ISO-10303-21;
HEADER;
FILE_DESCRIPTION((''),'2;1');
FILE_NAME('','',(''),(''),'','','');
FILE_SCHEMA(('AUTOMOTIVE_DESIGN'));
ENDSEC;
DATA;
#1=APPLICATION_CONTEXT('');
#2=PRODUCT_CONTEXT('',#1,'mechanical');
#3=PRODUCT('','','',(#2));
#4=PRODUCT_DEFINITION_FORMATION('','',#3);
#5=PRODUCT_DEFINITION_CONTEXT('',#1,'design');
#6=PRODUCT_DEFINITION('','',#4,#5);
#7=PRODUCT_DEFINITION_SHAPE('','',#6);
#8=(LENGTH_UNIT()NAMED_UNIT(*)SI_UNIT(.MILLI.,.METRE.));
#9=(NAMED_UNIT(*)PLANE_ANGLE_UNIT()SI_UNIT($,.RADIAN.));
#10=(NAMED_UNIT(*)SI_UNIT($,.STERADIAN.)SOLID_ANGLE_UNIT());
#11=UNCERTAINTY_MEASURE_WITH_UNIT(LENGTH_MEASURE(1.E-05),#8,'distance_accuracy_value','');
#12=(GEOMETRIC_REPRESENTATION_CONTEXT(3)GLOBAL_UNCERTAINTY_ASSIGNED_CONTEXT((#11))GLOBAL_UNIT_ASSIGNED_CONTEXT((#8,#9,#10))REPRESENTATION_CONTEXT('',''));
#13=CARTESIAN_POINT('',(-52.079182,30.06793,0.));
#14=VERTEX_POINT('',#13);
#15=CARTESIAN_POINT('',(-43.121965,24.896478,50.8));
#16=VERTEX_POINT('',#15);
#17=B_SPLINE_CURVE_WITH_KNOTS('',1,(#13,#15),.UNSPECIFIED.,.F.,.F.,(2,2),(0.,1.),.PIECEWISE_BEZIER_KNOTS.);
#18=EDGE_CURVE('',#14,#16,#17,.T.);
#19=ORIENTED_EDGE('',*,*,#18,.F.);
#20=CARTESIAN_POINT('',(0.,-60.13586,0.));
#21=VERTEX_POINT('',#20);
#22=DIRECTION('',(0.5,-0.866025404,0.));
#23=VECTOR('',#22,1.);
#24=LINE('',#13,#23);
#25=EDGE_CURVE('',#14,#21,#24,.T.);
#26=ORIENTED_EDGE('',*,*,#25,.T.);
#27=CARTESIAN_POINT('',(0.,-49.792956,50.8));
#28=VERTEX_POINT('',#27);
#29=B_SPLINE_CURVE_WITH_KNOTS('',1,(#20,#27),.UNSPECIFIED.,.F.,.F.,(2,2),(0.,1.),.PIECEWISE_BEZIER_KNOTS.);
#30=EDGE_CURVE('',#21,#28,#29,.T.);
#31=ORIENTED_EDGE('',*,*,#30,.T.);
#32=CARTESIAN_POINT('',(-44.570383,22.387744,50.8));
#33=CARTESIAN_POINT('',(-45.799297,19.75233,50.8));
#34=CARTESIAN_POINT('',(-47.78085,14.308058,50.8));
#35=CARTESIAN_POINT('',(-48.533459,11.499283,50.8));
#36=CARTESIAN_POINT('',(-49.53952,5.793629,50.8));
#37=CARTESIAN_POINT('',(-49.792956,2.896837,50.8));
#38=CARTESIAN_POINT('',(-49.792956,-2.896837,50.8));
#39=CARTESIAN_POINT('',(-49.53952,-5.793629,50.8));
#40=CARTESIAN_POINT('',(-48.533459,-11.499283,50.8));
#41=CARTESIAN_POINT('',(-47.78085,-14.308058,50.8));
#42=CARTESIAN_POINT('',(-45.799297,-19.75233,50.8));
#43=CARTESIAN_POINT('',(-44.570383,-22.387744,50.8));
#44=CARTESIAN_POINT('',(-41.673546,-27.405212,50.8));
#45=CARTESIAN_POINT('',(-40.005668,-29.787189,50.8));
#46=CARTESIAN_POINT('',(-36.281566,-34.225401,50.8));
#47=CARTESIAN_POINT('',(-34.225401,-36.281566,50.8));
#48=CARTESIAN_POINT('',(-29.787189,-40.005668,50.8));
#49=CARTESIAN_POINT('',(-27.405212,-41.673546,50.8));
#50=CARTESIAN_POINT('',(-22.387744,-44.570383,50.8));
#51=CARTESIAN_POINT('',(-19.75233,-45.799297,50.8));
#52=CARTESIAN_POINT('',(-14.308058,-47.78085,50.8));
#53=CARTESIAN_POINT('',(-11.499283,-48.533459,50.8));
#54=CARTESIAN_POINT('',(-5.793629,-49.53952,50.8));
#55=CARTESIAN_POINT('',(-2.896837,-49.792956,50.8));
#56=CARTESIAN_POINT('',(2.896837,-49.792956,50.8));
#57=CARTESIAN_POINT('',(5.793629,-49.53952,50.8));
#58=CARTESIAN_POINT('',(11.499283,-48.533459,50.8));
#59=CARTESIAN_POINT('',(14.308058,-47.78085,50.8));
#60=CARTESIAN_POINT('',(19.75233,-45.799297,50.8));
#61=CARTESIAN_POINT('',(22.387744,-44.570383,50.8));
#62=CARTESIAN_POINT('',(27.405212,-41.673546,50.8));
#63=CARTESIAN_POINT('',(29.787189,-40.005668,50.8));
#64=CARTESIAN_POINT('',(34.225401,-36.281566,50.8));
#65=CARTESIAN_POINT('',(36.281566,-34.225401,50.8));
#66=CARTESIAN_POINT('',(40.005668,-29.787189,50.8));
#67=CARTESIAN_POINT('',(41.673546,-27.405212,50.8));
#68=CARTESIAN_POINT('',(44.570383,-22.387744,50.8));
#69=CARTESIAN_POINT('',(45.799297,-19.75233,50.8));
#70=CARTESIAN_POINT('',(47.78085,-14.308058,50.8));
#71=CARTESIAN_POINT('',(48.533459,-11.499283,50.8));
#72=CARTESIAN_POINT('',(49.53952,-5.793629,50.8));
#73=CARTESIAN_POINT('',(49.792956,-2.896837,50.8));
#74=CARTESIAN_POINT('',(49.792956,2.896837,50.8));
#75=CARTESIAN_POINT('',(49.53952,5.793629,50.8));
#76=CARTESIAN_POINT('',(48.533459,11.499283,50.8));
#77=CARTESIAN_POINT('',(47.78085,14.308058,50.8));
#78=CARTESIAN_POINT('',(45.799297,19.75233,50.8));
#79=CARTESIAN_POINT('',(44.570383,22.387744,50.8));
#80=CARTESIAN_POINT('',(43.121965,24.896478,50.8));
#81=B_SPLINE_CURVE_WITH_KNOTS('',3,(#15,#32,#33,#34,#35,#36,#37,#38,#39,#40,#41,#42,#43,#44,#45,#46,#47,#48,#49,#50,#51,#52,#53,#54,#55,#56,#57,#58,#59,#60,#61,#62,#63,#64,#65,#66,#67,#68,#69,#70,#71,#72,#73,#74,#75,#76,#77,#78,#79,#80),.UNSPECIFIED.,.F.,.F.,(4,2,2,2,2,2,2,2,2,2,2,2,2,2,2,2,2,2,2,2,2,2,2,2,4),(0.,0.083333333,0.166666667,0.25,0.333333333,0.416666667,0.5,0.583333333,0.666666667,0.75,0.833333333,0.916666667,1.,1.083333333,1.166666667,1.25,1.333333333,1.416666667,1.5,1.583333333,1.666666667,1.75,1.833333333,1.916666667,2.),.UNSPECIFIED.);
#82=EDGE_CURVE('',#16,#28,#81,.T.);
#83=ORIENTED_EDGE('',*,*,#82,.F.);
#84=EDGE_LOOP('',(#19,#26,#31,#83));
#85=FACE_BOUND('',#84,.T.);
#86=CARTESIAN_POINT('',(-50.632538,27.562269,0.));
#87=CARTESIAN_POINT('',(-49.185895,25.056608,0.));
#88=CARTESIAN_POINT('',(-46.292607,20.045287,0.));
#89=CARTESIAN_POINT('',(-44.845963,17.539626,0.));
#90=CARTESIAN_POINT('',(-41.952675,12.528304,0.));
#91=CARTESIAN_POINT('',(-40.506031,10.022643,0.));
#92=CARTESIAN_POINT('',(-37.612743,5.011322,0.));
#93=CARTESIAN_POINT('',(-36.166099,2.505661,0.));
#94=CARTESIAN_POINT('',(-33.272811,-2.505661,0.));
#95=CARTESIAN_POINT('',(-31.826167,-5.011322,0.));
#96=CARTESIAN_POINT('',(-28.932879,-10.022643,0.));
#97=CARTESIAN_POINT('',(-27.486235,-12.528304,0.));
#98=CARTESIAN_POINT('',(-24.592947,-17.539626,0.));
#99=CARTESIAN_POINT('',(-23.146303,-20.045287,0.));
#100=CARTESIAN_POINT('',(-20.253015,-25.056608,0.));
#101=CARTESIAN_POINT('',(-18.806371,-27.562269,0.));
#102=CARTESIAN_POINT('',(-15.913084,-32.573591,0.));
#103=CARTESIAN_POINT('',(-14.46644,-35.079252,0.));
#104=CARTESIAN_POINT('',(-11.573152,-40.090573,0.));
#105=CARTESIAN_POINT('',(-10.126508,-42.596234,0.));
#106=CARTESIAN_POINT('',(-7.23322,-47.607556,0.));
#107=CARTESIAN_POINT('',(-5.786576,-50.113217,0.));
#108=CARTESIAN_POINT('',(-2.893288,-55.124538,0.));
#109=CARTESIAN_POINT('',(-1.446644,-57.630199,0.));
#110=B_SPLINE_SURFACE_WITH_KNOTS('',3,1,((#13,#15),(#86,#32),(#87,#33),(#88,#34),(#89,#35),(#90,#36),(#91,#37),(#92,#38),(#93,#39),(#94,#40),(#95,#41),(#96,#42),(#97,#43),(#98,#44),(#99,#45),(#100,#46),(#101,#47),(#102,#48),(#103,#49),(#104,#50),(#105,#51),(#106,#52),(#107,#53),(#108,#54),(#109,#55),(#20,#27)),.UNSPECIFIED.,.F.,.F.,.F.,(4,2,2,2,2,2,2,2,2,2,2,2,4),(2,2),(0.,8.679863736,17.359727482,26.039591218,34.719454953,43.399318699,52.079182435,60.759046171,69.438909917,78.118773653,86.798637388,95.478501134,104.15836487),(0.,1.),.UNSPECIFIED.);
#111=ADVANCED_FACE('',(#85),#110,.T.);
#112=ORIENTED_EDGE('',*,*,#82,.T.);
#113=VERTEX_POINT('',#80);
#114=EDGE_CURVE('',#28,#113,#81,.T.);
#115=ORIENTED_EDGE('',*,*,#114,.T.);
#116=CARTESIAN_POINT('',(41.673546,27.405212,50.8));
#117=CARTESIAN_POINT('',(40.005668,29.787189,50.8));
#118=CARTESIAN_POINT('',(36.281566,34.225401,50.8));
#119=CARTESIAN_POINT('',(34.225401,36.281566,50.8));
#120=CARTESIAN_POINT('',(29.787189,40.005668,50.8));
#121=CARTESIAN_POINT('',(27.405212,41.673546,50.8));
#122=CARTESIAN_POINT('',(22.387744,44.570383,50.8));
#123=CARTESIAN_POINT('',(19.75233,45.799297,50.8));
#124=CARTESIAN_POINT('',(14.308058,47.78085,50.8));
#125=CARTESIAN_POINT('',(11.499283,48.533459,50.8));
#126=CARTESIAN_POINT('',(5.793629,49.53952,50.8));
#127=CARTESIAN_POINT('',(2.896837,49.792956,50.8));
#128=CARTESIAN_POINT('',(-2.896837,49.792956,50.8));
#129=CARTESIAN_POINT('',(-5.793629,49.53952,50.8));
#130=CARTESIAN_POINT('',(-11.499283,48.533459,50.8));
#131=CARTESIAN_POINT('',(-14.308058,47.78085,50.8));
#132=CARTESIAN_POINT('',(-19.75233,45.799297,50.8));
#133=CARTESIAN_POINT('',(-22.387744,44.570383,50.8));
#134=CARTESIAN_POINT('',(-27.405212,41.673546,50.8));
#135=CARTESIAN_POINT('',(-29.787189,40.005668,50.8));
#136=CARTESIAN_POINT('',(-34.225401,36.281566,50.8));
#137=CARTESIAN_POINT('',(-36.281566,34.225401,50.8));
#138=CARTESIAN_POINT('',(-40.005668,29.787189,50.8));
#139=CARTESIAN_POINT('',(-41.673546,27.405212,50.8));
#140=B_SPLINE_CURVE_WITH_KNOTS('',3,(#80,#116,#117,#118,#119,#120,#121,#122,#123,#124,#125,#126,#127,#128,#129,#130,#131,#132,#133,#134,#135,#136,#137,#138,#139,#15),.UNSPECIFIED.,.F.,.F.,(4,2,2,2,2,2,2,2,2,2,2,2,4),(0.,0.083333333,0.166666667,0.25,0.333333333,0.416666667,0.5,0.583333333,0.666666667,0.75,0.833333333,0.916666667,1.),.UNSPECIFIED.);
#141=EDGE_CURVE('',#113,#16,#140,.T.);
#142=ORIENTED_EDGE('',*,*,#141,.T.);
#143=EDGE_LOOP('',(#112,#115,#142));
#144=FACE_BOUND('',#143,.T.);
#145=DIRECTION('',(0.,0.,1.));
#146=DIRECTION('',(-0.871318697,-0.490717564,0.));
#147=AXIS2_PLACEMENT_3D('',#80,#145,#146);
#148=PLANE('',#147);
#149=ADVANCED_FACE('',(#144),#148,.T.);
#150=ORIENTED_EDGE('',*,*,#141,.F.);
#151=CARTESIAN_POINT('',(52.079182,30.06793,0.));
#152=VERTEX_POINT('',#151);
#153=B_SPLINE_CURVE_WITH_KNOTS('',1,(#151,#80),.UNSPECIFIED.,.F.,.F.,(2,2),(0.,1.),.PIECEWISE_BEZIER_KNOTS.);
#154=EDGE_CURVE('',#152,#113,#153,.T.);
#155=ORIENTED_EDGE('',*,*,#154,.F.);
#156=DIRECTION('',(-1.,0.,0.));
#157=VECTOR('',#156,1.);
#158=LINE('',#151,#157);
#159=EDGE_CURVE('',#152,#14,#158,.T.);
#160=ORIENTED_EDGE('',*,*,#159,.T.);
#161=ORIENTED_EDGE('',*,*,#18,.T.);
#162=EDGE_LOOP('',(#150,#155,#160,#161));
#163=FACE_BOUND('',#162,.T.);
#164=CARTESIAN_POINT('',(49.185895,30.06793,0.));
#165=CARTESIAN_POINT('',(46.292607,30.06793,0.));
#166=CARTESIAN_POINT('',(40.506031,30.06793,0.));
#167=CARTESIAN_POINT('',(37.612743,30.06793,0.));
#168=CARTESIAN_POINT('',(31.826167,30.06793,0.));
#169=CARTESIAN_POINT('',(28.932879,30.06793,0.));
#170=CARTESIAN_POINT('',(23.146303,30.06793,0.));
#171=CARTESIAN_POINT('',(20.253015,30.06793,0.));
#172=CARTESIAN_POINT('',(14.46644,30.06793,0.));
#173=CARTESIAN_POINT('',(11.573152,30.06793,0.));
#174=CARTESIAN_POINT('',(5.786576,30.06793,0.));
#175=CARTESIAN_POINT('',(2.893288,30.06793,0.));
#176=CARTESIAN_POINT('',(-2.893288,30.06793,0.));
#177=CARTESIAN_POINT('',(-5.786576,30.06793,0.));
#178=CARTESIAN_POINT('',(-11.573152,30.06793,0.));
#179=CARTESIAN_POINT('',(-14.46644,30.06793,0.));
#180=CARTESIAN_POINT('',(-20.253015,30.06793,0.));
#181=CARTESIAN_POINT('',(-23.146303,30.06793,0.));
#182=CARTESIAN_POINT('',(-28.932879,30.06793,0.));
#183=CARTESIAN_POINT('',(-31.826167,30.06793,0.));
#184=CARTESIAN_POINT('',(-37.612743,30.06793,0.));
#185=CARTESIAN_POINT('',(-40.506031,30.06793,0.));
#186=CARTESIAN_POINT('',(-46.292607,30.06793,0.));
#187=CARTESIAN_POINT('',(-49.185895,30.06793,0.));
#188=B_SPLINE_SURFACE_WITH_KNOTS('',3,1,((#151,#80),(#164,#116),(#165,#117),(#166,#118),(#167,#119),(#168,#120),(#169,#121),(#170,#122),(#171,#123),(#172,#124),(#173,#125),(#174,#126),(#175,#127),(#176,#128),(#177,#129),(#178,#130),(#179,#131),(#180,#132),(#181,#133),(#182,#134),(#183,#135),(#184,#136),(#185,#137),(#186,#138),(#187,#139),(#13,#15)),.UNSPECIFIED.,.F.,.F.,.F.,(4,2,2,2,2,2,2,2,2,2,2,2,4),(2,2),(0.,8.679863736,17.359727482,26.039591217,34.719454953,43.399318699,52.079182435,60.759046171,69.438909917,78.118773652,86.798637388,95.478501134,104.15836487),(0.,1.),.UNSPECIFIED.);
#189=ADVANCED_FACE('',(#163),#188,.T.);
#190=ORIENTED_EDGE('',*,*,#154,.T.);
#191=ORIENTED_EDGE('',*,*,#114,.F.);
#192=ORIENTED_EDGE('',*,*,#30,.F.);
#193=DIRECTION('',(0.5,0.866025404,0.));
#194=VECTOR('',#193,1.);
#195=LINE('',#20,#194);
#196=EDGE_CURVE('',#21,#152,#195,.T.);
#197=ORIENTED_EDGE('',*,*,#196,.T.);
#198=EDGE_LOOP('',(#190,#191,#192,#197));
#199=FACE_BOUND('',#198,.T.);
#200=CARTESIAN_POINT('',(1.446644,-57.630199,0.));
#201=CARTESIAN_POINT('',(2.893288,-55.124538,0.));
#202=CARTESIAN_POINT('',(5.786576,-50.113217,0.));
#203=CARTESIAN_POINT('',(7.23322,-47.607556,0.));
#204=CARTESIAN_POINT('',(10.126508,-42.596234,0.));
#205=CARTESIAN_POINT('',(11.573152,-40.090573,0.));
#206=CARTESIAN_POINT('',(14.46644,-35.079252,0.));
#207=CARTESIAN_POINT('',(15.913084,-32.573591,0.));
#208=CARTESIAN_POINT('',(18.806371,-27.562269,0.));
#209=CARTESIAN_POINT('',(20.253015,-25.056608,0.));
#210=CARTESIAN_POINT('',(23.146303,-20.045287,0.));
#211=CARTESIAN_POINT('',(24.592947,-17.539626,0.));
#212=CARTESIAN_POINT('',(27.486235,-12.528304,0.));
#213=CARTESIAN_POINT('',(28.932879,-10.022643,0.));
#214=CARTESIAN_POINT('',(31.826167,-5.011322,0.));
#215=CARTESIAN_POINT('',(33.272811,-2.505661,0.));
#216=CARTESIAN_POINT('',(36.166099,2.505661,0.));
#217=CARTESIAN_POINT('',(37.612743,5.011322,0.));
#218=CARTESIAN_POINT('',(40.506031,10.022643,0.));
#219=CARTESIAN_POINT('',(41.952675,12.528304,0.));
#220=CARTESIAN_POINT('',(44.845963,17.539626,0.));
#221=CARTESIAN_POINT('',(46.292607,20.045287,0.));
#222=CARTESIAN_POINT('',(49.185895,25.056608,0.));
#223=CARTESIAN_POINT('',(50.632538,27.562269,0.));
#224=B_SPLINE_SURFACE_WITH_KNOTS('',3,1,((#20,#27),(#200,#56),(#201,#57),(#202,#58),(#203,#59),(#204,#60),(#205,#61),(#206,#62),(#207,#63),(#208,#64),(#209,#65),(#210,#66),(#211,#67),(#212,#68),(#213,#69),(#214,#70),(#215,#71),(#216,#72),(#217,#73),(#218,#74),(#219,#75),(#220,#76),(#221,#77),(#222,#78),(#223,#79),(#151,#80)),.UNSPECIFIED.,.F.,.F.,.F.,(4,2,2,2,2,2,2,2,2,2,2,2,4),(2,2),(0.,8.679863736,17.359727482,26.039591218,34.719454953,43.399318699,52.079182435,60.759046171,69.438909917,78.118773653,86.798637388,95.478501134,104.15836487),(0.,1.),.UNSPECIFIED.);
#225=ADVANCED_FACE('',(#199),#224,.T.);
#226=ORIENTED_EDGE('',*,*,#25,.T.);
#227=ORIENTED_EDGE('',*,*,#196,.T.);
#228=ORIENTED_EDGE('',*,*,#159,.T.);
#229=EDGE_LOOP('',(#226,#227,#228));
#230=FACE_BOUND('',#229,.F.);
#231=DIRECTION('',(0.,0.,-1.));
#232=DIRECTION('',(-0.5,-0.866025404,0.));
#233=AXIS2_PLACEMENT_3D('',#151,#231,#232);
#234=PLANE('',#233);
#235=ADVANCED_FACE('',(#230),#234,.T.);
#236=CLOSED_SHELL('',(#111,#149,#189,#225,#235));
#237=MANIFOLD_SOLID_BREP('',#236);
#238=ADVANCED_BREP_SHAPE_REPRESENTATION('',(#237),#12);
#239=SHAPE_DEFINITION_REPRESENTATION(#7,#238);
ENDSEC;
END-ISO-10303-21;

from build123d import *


# Not quite as in the source:
# - the arcs of a loft's sections are written as splines that run evenly, so that the points pair up as in the source's solid


with BuildPart() as f3:
    # F0 (on Top) → F3 section 0
    with BuildSketch(Plane.XY):
        Polygon((52.079182435, 30.067929998), (-52.079182435, 30.067929998), (0, -60.1358599961), align=None)
    # F2 (on offset) → F3 section 1
    with BuildSketch(Plane.XY.offset(50.8)):
        with BuildLine():
            add(Edge.make_bspline(
                [(43.1219648235, 24.8964779988), (41.673546446, 27.4052122192), (40.0056680218, 29.7871894663), (36.2815664752, 34.2254008636), (34.2254008636, 36.2815664752), (29.7871894663, 40.0056680218), (27.4052122192, 41.673546446), (22.3877437785, 44.5703832009), (19.7523300691, 45.799296796), (14.3080578248, 47.7808498402), (11.499283365, 48.5334586884), (5.7936287742, 49.5395195354), (2.8968367549, 49.7929559976), (-2.8968367549, 49.7929559976), (-5.7936287742, 49.5395195354), (-11.499283365, 48.5334586884), (-14.3080578248, 47.7808498402), (-19.7523300691, 45.799296796), (-22.3877437785, 44.5703832009), (-27.4052122192, 41.673546446), (-29.7871894663, 40.0056680218), (-34.2254008636, 36.2815664752), (-36.2815664752, 34.2254008636), (-40.0056680218, 29.7871894663), (-41.673546446, 27.4052122192), (-43.1219648235, 24.8964779988)],
                knots=[0, 0, 0, 0, 0.0833333333, 0.0833333333, 0.1666666667, 0.1666666667, 0.25, 0.25, 0.3333333333, 0.3333333333, 0.4166666667, 0.4166666667, 0.5, 0.5, 0.5833333333, 0.5833333333, 0.6666666667, 0.6666666667, 0.75, 0.75, 0.8333333333, 0.8333333333, 0.9166666667, 0.9166666667, 1, 1, 1, 1], degree=3))
            add(Edge.make_bspline(
                [(-43.1219648235, 24.8964779988), (-44.5703832009, 22.3877437785), (-45.799296796, 19.7523300691), (-47.7808498402, 14.3080578248), (-48.5334586884, 11.499283365), (-49.5395195354, 5.7936287742), (-49.7929559976, 2.8968367549), (-49.7929559976, -2.8968367549), (-49.5395195354, -5.7936287742), (-48.5334586884, -11.499283365), (-47.7808498402, -14.3080578248), (-45.799296796, -19.7523300691), (-44.5703832009, -22.3877437785), (-41.673546446, -27.4052122192), (-40.0056680218, -29.7871894663), (-36.2815664752, -34.2254008636), (-34.2254008636, -36.2815664752), (-29.7871894663, -40.0056680218), (-27.4052122192, -41.673546446), (-22.3877437785, -44.5703832009), (-19.7523300691, -45.799296796), (-14.3080578248, -47.7808498402), (-11.499283365, -48.5334586884), (-5.7936287742, -49.5395195354), (-2.8968367549, -49.7929559976), (0, -49.7929559976)],
                knots=[0, 0, 0, 0, 0.0833333333, 0.0833333333, 0.1666666667, 0.1666666667, 0.25, 0.25, 0.3333333333, 0.3333333333, 0.4166666667, 0.4166666667, 0.5, 0.5, 0.5833333333, 0.5833333333, 0.6666666667, 0.6666666667, 0.75, 0.75, 0.8333333333, 0.8333333333, 0.9166666667, 0.9166666667, 1, 1, 1, 1], degree=3))
            add(Edge.make_bspline(
                [(0, -49.7929559976), (2.8968367549, -49.7929559976), (5.7936287742, -49.5395195354), (11.499283365, -48.5334586884), (14.3080578248, -47.7808498402), (19.7523300691, -45.799296796), (22.3877437785, -44.5703832009), (27.4052122192, -41.673546446), (29.7871894663, -40.0056680218), (34.2254008636, -36.2815664752), (36.2815664752, -34.2254008636), (40.0056680218, -29.7871894663), (41.673546446, -27.4052122192), (44.5703832009, -22.3877437785), (45.799296796, -19.7523300691), (47.7808498402, -14.3080578248), (48.5334586884, -11.499283365), (49.5395195354, -5.7936287742), (49.7929559976, -2.8968367549), (49.7929559976, 2.8968367549), (49.5395195354, 5.7936287742), (48.5334586884, 11.499283365), (47.7808498402, 14.3080578248), (45.799296796, 19.7523300691), (44.5703832009, 22.3877437785), (43.1219648235, 24.8964779988)],
                knots=[0, 0, 0, 0, 0.0833333333, 0.0833333333, 0.1666666667, 0.1666666667, 0.25, 0.25, 0.3333333333, 0.3333333333, 0.4166666667, 0.4166666667, 0.5, 0.5, 0.5833333333, 0.5833333333, 0.6666666667, 0.6666666667, 0.75, 0.75, 0.8333333333, 0.8333333333, 0.9166666667, 0.9166666667, 1, 1, 1, 1], degree=3))
        make_face()
    loft(ruled=True)


solid = f3.part
